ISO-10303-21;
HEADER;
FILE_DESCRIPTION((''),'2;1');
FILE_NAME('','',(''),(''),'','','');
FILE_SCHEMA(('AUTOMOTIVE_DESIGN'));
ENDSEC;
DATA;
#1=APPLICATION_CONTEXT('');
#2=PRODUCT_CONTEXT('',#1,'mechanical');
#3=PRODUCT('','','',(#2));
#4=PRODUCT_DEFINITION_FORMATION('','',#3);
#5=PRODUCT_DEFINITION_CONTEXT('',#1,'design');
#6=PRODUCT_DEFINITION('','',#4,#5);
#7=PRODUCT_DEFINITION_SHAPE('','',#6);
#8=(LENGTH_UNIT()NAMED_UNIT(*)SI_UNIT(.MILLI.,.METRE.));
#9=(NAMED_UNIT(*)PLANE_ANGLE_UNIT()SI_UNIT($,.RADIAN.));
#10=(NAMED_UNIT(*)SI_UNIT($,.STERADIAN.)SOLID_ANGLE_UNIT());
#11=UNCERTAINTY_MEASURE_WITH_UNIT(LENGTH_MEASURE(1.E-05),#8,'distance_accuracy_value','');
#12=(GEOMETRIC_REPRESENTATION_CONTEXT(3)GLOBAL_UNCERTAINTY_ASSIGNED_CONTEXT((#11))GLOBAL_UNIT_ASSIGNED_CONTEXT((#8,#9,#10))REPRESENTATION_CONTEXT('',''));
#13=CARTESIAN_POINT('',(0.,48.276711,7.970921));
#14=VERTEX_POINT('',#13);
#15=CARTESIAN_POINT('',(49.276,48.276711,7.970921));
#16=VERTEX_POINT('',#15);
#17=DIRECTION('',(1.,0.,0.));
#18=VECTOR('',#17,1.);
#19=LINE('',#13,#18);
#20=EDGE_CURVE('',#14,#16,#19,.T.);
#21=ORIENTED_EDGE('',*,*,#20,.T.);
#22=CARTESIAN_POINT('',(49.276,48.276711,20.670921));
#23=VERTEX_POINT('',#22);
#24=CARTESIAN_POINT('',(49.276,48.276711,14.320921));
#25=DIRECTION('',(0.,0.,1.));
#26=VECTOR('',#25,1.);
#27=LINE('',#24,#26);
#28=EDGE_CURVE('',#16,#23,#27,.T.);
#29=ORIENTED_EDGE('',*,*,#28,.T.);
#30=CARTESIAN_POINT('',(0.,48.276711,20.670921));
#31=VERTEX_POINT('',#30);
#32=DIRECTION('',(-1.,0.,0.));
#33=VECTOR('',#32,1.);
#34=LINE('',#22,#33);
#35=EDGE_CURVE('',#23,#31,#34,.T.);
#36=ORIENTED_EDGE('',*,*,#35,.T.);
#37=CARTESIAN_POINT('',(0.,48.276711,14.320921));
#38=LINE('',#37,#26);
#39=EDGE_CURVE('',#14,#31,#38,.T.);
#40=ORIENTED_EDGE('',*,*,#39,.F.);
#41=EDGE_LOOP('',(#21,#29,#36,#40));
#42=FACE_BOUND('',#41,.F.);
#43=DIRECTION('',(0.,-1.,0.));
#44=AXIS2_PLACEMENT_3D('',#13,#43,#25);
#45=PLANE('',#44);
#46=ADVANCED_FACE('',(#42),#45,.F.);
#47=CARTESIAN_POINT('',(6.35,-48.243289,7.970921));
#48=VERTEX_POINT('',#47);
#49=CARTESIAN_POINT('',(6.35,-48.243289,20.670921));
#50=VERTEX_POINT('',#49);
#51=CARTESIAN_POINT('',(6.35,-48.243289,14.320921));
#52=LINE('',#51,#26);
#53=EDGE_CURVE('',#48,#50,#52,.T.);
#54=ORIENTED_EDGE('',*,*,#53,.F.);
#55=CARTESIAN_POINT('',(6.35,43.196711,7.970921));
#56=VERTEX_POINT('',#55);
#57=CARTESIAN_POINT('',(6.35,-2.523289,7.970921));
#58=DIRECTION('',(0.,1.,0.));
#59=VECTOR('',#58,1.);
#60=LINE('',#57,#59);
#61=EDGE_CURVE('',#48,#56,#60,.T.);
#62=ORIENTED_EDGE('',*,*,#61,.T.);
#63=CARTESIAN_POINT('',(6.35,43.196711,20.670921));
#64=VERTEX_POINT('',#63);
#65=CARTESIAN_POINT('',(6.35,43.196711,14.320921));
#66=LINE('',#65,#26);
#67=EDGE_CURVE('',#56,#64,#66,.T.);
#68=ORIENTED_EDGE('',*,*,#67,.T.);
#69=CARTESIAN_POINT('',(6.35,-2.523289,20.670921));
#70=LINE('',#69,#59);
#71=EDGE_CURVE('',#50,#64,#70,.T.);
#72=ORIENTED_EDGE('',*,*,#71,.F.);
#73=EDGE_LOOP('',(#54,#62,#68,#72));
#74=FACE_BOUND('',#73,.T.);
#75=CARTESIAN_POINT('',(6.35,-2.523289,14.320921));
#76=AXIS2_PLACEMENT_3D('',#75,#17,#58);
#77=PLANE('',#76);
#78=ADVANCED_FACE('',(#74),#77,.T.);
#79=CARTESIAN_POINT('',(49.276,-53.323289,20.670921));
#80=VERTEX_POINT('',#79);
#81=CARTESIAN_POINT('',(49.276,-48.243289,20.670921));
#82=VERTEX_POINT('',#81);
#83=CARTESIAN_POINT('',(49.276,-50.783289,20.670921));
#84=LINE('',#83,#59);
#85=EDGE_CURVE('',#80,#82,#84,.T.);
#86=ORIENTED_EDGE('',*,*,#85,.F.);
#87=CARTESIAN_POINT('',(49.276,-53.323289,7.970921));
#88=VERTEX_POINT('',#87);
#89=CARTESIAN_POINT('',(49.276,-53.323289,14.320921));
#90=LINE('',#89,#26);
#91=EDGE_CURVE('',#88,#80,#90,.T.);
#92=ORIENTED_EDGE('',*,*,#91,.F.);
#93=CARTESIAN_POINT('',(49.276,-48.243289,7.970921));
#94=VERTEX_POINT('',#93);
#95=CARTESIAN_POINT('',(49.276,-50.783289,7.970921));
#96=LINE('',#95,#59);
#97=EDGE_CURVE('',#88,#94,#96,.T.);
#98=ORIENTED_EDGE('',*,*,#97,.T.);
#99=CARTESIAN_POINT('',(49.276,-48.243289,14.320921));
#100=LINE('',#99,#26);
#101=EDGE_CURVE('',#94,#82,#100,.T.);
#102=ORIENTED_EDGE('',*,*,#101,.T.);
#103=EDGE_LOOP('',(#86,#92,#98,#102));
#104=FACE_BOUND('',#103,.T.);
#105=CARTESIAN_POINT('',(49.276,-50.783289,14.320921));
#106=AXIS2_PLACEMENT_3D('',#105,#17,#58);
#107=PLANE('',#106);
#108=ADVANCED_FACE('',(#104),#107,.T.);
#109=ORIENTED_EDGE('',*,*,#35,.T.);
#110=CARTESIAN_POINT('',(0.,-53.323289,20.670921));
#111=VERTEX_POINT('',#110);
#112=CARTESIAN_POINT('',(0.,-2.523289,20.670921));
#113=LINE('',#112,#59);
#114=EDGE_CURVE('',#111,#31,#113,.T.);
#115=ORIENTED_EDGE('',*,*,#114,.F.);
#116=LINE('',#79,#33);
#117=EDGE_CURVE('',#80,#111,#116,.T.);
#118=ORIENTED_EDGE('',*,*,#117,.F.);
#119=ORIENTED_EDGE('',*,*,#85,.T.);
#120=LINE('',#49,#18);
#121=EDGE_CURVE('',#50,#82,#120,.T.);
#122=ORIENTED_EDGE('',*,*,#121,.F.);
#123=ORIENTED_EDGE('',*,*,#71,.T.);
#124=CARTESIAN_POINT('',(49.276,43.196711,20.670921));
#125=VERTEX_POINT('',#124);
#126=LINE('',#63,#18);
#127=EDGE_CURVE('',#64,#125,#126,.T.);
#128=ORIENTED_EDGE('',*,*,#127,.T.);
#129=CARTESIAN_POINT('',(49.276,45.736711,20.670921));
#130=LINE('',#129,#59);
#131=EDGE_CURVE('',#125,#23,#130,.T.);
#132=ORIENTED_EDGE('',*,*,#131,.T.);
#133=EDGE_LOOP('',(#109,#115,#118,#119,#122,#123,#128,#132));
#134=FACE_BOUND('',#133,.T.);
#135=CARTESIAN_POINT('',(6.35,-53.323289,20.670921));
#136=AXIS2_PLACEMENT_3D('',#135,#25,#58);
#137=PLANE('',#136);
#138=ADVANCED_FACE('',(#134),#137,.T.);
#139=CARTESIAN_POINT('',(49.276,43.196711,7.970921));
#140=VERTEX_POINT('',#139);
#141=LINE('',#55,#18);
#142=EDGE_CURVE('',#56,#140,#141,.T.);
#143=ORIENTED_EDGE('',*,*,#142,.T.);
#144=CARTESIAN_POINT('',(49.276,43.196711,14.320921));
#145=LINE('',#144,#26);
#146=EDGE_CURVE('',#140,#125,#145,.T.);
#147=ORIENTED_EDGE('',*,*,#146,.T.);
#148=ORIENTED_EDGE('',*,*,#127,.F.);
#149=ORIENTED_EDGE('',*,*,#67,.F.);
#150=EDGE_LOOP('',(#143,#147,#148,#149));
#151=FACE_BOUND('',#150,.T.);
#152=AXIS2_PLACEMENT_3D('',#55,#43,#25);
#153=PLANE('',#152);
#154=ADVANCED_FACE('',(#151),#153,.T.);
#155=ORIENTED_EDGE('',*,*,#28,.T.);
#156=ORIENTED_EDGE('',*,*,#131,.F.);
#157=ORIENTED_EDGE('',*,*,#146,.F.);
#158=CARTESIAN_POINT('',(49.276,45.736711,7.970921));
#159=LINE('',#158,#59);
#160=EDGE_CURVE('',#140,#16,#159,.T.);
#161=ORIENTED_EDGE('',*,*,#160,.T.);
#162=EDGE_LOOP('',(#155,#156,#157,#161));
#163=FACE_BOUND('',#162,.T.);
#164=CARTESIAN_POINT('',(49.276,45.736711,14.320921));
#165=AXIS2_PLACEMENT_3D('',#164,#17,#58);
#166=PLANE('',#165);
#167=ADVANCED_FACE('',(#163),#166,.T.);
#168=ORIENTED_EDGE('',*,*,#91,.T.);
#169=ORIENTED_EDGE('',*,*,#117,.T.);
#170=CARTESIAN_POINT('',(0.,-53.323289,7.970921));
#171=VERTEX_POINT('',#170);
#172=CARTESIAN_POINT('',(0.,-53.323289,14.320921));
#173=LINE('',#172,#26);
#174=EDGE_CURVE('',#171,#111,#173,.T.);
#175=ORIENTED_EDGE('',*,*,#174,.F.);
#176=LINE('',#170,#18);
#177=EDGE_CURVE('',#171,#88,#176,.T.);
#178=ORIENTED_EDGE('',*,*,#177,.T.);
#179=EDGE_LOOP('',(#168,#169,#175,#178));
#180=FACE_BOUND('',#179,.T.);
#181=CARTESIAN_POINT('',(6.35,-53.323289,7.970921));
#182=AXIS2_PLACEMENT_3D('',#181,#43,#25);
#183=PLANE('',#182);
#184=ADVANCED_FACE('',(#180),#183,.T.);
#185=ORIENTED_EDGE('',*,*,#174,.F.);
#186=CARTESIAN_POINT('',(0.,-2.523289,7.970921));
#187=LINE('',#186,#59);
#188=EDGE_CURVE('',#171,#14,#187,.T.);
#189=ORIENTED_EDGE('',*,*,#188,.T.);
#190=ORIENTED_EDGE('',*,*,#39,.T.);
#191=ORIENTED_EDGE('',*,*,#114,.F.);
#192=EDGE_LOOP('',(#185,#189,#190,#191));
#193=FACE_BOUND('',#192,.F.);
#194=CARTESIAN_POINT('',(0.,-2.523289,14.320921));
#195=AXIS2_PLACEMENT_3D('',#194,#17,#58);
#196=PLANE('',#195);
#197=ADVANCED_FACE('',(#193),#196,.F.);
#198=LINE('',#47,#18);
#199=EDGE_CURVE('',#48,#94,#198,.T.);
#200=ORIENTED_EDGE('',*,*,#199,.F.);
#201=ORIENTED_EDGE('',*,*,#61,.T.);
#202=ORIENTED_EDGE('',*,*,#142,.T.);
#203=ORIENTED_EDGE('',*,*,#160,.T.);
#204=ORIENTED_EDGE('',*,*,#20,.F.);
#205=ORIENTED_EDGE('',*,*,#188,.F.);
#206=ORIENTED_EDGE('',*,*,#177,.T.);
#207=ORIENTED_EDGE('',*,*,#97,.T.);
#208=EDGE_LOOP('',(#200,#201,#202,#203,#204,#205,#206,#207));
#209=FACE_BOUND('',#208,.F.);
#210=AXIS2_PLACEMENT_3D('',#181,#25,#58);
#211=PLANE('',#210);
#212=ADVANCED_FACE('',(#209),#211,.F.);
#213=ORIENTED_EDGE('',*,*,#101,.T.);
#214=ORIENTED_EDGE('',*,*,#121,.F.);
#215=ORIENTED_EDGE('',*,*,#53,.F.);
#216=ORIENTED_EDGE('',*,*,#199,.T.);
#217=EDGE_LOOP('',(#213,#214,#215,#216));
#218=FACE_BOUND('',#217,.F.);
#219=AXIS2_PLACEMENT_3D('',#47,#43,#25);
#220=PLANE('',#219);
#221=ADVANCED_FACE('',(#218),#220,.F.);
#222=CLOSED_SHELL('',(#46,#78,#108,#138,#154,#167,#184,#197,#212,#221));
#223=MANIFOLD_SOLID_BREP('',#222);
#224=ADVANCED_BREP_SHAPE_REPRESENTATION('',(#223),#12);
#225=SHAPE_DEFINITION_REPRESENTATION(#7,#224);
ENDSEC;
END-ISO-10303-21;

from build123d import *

# Parameters (mm, degrees)
F5_W     = 101.6
F5_H     = 12.7
F6_DEPTH = 6.35
F7_W     = 5.08
F7_H     = 12.7
F8_DEPTH = 42.926


# Not quite as in the source:
# - a feature of the source that left no trace in its solid (it failed there, or was rolled back) is left out


with BuildPart() as f6:
    # F5 (on Right) → F6 (new body)
    with BuildSketch(Plane.YZ):
        with Locations((-2.5232887447, 14.3209207639)):
            Rectangle(F5_W, F5_H)
    extrude(amount=F6_DEPTH)

    # F7 (on face) → F8 (join)
    with BuildSketch(Plane.YZ.offset(6.35)):
        with Locations((-50.7832887447, 14.3209207639)):
            Rectangle(F7_W, F7_H)
        with Locations((45.7367112553, 14.3209207639)):
            Rectangle(F7_W, F7_H)
    extrude(amount=F8_DEPTH)


solid = f6.part
